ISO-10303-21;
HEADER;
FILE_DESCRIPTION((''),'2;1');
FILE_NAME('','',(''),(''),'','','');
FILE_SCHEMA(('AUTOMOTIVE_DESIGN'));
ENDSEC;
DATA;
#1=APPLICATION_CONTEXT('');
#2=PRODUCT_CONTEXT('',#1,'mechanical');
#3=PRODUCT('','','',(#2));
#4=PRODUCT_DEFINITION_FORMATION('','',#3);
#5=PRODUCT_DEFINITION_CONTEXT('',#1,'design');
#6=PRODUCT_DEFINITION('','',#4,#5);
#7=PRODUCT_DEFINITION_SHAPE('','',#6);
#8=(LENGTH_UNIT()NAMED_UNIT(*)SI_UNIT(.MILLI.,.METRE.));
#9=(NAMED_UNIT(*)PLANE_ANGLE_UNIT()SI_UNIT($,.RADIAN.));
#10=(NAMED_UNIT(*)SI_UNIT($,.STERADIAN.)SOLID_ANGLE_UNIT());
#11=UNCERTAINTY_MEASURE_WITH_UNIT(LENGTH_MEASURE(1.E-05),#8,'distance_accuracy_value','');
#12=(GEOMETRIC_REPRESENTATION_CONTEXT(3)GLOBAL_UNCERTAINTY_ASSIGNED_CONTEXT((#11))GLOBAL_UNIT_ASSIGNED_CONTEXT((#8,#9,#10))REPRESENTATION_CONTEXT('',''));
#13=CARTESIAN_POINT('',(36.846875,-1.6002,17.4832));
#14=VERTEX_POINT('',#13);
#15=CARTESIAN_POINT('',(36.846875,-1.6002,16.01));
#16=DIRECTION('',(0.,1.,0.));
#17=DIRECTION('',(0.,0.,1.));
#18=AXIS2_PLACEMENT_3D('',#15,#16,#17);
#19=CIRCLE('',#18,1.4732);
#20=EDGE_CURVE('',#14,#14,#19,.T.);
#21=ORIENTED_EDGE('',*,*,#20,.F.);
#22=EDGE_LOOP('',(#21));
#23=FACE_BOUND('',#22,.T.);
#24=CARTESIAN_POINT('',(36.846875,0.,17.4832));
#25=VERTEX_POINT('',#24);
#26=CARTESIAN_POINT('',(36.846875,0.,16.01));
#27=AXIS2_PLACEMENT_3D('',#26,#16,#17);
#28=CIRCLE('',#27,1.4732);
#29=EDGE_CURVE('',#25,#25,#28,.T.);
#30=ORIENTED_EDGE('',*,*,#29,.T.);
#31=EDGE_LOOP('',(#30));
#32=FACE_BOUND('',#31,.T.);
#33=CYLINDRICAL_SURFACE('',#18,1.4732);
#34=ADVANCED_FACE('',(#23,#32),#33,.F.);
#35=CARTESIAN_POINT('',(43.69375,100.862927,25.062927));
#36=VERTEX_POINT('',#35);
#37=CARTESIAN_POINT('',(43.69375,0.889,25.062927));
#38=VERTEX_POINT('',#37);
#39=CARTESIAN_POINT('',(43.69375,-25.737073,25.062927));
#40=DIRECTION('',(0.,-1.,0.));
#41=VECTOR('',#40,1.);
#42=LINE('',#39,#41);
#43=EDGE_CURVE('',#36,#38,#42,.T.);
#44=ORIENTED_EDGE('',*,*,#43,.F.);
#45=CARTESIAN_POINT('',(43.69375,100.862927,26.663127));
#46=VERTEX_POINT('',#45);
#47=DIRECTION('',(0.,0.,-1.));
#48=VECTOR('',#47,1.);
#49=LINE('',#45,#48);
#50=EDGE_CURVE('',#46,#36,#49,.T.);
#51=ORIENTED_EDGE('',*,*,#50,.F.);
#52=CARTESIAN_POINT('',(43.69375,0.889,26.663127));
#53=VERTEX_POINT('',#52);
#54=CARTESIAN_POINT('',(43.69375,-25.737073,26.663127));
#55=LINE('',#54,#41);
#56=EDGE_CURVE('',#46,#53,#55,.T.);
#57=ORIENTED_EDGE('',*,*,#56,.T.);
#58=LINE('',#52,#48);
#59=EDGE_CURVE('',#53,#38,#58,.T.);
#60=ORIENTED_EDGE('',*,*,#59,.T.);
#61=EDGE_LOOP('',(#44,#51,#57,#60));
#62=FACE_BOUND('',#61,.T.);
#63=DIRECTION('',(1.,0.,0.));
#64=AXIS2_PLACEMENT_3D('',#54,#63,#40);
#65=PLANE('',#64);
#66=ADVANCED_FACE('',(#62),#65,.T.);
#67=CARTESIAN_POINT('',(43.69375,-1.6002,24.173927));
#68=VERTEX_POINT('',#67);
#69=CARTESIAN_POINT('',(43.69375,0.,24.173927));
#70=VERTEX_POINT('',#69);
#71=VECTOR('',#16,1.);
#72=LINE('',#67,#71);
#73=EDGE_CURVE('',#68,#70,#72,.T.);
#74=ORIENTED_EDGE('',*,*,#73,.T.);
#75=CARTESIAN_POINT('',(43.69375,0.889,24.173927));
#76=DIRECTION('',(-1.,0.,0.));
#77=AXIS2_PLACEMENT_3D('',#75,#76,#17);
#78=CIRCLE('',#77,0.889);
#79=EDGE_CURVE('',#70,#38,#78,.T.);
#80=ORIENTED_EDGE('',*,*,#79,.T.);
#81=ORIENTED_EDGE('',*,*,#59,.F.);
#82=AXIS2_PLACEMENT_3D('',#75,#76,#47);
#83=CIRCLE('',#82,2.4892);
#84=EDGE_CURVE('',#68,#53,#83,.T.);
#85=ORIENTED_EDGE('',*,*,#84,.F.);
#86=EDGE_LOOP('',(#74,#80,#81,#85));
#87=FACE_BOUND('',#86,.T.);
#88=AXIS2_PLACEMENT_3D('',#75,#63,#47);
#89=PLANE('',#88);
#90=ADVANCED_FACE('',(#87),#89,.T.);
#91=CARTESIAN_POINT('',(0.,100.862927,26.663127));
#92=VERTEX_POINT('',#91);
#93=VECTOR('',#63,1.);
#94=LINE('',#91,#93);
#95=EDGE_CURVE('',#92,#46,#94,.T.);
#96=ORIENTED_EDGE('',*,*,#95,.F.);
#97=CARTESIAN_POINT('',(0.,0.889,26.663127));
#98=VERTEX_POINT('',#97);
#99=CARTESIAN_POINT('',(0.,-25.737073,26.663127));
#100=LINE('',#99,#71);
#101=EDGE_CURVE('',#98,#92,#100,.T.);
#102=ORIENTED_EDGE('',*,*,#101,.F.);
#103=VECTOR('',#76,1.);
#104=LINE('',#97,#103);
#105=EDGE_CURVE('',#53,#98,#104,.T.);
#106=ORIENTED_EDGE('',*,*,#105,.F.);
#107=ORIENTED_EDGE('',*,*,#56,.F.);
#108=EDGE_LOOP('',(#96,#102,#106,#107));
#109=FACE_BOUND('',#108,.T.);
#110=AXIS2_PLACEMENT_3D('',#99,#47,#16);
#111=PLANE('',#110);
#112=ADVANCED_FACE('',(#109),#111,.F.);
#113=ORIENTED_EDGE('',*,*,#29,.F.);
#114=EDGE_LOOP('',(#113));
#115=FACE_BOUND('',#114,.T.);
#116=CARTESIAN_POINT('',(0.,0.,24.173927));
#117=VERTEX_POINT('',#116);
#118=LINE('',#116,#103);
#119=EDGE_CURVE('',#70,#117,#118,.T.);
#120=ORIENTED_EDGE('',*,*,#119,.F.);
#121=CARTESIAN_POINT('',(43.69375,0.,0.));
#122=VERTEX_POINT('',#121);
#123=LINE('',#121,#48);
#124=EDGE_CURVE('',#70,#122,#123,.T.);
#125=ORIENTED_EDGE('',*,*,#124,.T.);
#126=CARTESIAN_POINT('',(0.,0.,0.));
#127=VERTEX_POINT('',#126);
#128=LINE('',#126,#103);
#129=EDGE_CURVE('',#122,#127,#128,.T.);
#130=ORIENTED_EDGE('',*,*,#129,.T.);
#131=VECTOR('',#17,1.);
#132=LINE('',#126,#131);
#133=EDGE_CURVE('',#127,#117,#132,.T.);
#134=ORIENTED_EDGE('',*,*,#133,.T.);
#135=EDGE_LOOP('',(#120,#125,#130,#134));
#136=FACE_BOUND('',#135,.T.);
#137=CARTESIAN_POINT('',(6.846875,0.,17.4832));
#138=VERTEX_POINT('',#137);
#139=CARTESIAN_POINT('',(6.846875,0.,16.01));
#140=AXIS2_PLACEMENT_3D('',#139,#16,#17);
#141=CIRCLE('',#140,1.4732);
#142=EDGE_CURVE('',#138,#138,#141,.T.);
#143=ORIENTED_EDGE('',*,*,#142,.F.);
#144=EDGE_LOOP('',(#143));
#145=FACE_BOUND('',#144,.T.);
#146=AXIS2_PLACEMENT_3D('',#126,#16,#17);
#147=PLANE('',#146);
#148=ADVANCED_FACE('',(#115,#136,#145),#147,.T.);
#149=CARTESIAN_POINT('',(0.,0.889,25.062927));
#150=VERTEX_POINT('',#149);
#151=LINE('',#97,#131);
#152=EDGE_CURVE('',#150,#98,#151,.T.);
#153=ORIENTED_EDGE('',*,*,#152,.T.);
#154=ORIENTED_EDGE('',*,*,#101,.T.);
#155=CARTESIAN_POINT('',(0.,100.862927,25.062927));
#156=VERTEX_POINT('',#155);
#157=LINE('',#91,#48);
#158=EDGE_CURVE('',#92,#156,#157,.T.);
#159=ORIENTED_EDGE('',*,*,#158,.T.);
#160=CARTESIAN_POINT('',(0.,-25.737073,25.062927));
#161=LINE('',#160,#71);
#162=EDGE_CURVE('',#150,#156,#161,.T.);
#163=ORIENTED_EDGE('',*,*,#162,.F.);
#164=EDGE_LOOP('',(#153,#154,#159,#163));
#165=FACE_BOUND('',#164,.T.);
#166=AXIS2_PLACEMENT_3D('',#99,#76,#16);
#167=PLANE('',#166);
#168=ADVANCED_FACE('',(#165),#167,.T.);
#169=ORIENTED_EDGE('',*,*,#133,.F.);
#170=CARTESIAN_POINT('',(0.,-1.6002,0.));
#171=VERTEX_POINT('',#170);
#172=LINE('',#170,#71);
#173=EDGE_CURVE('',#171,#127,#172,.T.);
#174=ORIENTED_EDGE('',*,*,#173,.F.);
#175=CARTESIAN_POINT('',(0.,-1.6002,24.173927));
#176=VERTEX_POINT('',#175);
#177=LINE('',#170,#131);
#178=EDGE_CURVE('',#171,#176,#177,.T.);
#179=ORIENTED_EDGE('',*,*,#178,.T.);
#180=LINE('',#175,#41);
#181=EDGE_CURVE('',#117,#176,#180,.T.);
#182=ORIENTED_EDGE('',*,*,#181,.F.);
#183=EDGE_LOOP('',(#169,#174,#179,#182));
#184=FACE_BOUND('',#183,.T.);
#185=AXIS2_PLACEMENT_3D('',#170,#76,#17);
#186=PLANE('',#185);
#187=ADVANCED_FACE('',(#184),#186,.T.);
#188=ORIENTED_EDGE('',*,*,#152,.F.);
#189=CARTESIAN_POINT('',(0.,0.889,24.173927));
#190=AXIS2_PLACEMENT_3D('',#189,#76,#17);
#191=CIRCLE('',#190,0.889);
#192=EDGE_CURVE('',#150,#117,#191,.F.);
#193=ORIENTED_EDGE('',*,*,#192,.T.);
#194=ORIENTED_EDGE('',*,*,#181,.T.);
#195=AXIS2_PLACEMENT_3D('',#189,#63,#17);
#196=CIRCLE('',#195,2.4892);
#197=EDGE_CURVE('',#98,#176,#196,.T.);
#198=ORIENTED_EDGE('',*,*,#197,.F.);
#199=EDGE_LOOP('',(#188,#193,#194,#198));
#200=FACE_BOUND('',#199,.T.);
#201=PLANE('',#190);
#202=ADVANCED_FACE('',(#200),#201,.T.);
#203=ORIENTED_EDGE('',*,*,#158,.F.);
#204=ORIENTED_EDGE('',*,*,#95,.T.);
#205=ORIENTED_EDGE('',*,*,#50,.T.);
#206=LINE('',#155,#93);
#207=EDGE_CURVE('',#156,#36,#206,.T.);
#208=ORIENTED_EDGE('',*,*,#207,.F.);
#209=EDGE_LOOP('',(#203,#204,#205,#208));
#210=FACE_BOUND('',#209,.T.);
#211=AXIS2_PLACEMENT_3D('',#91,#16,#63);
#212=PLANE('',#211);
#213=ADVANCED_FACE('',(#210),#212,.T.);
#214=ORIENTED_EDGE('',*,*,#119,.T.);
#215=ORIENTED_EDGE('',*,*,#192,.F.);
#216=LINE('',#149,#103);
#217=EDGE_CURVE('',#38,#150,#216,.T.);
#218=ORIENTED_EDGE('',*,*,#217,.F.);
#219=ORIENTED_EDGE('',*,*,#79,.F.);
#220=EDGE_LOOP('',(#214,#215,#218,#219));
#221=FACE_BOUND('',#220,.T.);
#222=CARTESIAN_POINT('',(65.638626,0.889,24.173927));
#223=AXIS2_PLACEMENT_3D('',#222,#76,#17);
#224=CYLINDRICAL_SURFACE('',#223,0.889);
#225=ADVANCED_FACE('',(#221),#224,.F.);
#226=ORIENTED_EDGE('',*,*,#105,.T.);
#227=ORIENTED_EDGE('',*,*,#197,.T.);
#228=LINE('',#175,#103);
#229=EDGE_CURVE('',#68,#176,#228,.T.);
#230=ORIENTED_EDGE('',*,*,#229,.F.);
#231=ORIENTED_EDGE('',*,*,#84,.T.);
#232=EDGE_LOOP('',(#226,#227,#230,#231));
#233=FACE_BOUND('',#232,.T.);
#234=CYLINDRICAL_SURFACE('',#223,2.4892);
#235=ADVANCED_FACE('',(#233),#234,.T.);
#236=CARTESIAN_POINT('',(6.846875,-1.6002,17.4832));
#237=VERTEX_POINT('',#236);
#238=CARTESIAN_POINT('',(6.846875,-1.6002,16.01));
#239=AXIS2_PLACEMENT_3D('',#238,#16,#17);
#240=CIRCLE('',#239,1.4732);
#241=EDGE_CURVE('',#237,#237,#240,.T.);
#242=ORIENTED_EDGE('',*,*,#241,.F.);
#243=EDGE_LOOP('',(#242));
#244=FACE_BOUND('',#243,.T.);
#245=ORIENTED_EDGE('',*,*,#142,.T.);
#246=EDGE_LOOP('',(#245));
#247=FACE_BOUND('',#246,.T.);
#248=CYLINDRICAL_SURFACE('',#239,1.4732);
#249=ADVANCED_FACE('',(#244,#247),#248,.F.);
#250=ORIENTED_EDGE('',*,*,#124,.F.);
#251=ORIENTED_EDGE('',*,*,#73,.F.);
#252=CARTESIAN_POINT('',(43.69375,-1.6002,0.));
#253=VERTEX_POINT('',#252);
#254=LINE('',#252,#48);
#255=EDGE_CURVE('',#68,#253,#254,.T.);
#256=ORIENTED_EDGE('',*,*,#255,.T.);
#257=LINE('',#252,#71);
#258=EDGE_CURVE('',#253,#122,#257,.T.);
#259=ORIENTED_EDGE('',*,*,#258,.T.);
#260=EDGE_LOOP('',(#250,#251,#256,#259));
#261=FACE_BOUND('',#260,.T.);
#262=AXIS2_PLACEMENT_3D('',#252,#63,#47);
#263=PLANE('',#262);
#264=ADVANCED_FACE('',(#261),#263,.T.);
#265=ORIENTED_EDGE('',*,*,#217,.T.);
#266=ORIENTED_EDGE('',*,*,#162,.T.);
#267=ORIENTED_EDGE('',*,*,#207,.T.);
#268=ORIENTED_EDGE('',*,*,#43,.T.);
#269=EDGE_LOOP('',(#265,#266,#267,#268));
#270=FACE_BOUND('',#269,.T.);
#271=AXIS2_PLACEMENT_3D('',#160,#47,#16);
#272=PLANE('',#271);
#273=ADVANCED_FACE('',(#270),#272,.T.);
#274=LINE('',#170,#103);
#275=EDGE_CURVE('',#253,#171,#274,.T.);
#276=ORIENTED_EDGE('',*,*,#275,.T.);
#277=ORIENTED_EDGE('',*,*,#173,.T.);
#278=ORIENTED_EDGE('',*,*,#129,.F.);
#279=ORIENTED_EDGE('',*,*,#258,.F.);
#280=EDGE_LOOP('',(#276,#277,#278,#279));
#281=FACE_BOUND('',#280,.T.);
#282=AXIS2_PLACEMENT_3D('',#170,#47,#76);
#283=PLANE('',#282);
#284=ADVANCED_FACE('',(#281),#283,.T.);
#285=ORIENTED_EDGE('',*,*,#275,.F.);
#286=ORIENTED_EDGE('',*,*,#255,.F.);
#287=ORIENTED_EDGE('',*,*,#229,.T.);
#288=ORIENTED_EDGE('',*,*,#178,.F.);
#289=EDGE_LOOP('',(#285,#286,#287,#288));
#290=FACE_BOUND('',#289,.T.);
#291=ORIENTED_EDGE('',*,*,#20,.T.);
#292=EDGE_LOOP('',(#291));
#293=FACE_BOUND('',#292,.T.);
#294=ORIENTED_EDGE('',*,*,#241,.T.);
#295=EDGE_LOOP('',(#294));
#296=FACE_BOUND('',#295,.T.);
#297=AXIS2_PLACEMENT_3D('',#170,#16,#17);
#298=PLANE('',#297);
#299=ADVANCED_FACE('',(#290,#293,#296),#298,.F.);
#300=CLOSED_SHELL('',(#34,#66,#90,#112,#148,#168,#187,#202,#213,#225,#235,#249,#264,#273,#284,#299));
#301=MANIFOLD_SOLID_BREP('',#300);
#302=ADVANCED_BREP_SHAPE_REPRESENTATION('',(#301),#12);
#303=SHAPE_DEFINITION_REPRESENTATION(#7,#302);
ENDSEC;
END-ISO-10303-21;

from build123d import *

# Parameters (mm, degrees)
SKETCH1_W              = 43.69375
SKETCH1_H              = 126.6
SKETCH1_R              = 1.4732
BASE_FLANGE1_DEPTH     = 1.6002
SKETCHED_BEND1_DEPTH   = 43.69375
SKETCHED_BEND1_2_DEPTH = 43.69375


# Read off the part's stored shape, not the designer's step: Sketched Bend1
# Sheet-metal steps are written as plain solids
with BuildPart() as part:
    # Sketch1 → Base-Flange1 (new body)
    with BuildSketch(Plane(origin=(0, 0, 0), x_dir=(1, 0, 0), z_dir=(0, 1, 0))):
        with Locations((21.846875, -63.3)):
            Rectangle(SKETCH1_W, SKETCH1_H)
        with Locations(Location((6.846875, -16.01, 0), (0, 0, 270))):
            Circle(SKETCH1_R, mode=Mode.SUBTRACT)
        with Locations(Location((36.846875, -16.01, 0), (0, 0, 270))):
            Circle(SKETCH1_R, mode=Mode.SUBTRACT)
    extrude(amount=-BASE_FLANGE1_DEPTH)

    # Sketched Bend1 outline → Sketched Bend1 (cut)
    with BuildSketch(Plane.YZ):
        with BuildLine():
            ThreePointArc((-1.6002, 24.173927493), (-1.16148963, 25.585171243), (0, 26.49896419))
            Line((0, 26.49896419), (0, 126.6))
            Line((0, 126.6), (-1.6002, 126.6))
            Line((-1.6002, 126.6), (-1.6002, 24.173927493))
        make_face()
    extrude(amount=SKETCHED_BEND1_DEPTH, mode=Mode.SUBTRACT)

    # Sketched Bend1 2 outline → Sketched Bend1 2 (add)
    with BuildSketch(Plane.YZ):
        with BuildLine():
            ThreePointArc((0, 24.173927493), (0.260382071, 24.802545421), (0.889, 25.062927493))
            Line((0.889, 25.062927493), (100.862927493, 25.062927493))
            Line((100.862927493, 25.062927493), (100.862927493, 26.663127493))
            Line((100.862927493, 26.663127493), (0.889, 26.663127493))
            ThreePointArc((0.889, 26.663127493), (0.436984903, 26.62174264), (0, 26.49896419))
            Line((0, 26.49896419), (0, 24.173927493))
        make_face()
    extrude(amount=SKETCHED_BEND1_2_DEPTH)


solid = part.part
